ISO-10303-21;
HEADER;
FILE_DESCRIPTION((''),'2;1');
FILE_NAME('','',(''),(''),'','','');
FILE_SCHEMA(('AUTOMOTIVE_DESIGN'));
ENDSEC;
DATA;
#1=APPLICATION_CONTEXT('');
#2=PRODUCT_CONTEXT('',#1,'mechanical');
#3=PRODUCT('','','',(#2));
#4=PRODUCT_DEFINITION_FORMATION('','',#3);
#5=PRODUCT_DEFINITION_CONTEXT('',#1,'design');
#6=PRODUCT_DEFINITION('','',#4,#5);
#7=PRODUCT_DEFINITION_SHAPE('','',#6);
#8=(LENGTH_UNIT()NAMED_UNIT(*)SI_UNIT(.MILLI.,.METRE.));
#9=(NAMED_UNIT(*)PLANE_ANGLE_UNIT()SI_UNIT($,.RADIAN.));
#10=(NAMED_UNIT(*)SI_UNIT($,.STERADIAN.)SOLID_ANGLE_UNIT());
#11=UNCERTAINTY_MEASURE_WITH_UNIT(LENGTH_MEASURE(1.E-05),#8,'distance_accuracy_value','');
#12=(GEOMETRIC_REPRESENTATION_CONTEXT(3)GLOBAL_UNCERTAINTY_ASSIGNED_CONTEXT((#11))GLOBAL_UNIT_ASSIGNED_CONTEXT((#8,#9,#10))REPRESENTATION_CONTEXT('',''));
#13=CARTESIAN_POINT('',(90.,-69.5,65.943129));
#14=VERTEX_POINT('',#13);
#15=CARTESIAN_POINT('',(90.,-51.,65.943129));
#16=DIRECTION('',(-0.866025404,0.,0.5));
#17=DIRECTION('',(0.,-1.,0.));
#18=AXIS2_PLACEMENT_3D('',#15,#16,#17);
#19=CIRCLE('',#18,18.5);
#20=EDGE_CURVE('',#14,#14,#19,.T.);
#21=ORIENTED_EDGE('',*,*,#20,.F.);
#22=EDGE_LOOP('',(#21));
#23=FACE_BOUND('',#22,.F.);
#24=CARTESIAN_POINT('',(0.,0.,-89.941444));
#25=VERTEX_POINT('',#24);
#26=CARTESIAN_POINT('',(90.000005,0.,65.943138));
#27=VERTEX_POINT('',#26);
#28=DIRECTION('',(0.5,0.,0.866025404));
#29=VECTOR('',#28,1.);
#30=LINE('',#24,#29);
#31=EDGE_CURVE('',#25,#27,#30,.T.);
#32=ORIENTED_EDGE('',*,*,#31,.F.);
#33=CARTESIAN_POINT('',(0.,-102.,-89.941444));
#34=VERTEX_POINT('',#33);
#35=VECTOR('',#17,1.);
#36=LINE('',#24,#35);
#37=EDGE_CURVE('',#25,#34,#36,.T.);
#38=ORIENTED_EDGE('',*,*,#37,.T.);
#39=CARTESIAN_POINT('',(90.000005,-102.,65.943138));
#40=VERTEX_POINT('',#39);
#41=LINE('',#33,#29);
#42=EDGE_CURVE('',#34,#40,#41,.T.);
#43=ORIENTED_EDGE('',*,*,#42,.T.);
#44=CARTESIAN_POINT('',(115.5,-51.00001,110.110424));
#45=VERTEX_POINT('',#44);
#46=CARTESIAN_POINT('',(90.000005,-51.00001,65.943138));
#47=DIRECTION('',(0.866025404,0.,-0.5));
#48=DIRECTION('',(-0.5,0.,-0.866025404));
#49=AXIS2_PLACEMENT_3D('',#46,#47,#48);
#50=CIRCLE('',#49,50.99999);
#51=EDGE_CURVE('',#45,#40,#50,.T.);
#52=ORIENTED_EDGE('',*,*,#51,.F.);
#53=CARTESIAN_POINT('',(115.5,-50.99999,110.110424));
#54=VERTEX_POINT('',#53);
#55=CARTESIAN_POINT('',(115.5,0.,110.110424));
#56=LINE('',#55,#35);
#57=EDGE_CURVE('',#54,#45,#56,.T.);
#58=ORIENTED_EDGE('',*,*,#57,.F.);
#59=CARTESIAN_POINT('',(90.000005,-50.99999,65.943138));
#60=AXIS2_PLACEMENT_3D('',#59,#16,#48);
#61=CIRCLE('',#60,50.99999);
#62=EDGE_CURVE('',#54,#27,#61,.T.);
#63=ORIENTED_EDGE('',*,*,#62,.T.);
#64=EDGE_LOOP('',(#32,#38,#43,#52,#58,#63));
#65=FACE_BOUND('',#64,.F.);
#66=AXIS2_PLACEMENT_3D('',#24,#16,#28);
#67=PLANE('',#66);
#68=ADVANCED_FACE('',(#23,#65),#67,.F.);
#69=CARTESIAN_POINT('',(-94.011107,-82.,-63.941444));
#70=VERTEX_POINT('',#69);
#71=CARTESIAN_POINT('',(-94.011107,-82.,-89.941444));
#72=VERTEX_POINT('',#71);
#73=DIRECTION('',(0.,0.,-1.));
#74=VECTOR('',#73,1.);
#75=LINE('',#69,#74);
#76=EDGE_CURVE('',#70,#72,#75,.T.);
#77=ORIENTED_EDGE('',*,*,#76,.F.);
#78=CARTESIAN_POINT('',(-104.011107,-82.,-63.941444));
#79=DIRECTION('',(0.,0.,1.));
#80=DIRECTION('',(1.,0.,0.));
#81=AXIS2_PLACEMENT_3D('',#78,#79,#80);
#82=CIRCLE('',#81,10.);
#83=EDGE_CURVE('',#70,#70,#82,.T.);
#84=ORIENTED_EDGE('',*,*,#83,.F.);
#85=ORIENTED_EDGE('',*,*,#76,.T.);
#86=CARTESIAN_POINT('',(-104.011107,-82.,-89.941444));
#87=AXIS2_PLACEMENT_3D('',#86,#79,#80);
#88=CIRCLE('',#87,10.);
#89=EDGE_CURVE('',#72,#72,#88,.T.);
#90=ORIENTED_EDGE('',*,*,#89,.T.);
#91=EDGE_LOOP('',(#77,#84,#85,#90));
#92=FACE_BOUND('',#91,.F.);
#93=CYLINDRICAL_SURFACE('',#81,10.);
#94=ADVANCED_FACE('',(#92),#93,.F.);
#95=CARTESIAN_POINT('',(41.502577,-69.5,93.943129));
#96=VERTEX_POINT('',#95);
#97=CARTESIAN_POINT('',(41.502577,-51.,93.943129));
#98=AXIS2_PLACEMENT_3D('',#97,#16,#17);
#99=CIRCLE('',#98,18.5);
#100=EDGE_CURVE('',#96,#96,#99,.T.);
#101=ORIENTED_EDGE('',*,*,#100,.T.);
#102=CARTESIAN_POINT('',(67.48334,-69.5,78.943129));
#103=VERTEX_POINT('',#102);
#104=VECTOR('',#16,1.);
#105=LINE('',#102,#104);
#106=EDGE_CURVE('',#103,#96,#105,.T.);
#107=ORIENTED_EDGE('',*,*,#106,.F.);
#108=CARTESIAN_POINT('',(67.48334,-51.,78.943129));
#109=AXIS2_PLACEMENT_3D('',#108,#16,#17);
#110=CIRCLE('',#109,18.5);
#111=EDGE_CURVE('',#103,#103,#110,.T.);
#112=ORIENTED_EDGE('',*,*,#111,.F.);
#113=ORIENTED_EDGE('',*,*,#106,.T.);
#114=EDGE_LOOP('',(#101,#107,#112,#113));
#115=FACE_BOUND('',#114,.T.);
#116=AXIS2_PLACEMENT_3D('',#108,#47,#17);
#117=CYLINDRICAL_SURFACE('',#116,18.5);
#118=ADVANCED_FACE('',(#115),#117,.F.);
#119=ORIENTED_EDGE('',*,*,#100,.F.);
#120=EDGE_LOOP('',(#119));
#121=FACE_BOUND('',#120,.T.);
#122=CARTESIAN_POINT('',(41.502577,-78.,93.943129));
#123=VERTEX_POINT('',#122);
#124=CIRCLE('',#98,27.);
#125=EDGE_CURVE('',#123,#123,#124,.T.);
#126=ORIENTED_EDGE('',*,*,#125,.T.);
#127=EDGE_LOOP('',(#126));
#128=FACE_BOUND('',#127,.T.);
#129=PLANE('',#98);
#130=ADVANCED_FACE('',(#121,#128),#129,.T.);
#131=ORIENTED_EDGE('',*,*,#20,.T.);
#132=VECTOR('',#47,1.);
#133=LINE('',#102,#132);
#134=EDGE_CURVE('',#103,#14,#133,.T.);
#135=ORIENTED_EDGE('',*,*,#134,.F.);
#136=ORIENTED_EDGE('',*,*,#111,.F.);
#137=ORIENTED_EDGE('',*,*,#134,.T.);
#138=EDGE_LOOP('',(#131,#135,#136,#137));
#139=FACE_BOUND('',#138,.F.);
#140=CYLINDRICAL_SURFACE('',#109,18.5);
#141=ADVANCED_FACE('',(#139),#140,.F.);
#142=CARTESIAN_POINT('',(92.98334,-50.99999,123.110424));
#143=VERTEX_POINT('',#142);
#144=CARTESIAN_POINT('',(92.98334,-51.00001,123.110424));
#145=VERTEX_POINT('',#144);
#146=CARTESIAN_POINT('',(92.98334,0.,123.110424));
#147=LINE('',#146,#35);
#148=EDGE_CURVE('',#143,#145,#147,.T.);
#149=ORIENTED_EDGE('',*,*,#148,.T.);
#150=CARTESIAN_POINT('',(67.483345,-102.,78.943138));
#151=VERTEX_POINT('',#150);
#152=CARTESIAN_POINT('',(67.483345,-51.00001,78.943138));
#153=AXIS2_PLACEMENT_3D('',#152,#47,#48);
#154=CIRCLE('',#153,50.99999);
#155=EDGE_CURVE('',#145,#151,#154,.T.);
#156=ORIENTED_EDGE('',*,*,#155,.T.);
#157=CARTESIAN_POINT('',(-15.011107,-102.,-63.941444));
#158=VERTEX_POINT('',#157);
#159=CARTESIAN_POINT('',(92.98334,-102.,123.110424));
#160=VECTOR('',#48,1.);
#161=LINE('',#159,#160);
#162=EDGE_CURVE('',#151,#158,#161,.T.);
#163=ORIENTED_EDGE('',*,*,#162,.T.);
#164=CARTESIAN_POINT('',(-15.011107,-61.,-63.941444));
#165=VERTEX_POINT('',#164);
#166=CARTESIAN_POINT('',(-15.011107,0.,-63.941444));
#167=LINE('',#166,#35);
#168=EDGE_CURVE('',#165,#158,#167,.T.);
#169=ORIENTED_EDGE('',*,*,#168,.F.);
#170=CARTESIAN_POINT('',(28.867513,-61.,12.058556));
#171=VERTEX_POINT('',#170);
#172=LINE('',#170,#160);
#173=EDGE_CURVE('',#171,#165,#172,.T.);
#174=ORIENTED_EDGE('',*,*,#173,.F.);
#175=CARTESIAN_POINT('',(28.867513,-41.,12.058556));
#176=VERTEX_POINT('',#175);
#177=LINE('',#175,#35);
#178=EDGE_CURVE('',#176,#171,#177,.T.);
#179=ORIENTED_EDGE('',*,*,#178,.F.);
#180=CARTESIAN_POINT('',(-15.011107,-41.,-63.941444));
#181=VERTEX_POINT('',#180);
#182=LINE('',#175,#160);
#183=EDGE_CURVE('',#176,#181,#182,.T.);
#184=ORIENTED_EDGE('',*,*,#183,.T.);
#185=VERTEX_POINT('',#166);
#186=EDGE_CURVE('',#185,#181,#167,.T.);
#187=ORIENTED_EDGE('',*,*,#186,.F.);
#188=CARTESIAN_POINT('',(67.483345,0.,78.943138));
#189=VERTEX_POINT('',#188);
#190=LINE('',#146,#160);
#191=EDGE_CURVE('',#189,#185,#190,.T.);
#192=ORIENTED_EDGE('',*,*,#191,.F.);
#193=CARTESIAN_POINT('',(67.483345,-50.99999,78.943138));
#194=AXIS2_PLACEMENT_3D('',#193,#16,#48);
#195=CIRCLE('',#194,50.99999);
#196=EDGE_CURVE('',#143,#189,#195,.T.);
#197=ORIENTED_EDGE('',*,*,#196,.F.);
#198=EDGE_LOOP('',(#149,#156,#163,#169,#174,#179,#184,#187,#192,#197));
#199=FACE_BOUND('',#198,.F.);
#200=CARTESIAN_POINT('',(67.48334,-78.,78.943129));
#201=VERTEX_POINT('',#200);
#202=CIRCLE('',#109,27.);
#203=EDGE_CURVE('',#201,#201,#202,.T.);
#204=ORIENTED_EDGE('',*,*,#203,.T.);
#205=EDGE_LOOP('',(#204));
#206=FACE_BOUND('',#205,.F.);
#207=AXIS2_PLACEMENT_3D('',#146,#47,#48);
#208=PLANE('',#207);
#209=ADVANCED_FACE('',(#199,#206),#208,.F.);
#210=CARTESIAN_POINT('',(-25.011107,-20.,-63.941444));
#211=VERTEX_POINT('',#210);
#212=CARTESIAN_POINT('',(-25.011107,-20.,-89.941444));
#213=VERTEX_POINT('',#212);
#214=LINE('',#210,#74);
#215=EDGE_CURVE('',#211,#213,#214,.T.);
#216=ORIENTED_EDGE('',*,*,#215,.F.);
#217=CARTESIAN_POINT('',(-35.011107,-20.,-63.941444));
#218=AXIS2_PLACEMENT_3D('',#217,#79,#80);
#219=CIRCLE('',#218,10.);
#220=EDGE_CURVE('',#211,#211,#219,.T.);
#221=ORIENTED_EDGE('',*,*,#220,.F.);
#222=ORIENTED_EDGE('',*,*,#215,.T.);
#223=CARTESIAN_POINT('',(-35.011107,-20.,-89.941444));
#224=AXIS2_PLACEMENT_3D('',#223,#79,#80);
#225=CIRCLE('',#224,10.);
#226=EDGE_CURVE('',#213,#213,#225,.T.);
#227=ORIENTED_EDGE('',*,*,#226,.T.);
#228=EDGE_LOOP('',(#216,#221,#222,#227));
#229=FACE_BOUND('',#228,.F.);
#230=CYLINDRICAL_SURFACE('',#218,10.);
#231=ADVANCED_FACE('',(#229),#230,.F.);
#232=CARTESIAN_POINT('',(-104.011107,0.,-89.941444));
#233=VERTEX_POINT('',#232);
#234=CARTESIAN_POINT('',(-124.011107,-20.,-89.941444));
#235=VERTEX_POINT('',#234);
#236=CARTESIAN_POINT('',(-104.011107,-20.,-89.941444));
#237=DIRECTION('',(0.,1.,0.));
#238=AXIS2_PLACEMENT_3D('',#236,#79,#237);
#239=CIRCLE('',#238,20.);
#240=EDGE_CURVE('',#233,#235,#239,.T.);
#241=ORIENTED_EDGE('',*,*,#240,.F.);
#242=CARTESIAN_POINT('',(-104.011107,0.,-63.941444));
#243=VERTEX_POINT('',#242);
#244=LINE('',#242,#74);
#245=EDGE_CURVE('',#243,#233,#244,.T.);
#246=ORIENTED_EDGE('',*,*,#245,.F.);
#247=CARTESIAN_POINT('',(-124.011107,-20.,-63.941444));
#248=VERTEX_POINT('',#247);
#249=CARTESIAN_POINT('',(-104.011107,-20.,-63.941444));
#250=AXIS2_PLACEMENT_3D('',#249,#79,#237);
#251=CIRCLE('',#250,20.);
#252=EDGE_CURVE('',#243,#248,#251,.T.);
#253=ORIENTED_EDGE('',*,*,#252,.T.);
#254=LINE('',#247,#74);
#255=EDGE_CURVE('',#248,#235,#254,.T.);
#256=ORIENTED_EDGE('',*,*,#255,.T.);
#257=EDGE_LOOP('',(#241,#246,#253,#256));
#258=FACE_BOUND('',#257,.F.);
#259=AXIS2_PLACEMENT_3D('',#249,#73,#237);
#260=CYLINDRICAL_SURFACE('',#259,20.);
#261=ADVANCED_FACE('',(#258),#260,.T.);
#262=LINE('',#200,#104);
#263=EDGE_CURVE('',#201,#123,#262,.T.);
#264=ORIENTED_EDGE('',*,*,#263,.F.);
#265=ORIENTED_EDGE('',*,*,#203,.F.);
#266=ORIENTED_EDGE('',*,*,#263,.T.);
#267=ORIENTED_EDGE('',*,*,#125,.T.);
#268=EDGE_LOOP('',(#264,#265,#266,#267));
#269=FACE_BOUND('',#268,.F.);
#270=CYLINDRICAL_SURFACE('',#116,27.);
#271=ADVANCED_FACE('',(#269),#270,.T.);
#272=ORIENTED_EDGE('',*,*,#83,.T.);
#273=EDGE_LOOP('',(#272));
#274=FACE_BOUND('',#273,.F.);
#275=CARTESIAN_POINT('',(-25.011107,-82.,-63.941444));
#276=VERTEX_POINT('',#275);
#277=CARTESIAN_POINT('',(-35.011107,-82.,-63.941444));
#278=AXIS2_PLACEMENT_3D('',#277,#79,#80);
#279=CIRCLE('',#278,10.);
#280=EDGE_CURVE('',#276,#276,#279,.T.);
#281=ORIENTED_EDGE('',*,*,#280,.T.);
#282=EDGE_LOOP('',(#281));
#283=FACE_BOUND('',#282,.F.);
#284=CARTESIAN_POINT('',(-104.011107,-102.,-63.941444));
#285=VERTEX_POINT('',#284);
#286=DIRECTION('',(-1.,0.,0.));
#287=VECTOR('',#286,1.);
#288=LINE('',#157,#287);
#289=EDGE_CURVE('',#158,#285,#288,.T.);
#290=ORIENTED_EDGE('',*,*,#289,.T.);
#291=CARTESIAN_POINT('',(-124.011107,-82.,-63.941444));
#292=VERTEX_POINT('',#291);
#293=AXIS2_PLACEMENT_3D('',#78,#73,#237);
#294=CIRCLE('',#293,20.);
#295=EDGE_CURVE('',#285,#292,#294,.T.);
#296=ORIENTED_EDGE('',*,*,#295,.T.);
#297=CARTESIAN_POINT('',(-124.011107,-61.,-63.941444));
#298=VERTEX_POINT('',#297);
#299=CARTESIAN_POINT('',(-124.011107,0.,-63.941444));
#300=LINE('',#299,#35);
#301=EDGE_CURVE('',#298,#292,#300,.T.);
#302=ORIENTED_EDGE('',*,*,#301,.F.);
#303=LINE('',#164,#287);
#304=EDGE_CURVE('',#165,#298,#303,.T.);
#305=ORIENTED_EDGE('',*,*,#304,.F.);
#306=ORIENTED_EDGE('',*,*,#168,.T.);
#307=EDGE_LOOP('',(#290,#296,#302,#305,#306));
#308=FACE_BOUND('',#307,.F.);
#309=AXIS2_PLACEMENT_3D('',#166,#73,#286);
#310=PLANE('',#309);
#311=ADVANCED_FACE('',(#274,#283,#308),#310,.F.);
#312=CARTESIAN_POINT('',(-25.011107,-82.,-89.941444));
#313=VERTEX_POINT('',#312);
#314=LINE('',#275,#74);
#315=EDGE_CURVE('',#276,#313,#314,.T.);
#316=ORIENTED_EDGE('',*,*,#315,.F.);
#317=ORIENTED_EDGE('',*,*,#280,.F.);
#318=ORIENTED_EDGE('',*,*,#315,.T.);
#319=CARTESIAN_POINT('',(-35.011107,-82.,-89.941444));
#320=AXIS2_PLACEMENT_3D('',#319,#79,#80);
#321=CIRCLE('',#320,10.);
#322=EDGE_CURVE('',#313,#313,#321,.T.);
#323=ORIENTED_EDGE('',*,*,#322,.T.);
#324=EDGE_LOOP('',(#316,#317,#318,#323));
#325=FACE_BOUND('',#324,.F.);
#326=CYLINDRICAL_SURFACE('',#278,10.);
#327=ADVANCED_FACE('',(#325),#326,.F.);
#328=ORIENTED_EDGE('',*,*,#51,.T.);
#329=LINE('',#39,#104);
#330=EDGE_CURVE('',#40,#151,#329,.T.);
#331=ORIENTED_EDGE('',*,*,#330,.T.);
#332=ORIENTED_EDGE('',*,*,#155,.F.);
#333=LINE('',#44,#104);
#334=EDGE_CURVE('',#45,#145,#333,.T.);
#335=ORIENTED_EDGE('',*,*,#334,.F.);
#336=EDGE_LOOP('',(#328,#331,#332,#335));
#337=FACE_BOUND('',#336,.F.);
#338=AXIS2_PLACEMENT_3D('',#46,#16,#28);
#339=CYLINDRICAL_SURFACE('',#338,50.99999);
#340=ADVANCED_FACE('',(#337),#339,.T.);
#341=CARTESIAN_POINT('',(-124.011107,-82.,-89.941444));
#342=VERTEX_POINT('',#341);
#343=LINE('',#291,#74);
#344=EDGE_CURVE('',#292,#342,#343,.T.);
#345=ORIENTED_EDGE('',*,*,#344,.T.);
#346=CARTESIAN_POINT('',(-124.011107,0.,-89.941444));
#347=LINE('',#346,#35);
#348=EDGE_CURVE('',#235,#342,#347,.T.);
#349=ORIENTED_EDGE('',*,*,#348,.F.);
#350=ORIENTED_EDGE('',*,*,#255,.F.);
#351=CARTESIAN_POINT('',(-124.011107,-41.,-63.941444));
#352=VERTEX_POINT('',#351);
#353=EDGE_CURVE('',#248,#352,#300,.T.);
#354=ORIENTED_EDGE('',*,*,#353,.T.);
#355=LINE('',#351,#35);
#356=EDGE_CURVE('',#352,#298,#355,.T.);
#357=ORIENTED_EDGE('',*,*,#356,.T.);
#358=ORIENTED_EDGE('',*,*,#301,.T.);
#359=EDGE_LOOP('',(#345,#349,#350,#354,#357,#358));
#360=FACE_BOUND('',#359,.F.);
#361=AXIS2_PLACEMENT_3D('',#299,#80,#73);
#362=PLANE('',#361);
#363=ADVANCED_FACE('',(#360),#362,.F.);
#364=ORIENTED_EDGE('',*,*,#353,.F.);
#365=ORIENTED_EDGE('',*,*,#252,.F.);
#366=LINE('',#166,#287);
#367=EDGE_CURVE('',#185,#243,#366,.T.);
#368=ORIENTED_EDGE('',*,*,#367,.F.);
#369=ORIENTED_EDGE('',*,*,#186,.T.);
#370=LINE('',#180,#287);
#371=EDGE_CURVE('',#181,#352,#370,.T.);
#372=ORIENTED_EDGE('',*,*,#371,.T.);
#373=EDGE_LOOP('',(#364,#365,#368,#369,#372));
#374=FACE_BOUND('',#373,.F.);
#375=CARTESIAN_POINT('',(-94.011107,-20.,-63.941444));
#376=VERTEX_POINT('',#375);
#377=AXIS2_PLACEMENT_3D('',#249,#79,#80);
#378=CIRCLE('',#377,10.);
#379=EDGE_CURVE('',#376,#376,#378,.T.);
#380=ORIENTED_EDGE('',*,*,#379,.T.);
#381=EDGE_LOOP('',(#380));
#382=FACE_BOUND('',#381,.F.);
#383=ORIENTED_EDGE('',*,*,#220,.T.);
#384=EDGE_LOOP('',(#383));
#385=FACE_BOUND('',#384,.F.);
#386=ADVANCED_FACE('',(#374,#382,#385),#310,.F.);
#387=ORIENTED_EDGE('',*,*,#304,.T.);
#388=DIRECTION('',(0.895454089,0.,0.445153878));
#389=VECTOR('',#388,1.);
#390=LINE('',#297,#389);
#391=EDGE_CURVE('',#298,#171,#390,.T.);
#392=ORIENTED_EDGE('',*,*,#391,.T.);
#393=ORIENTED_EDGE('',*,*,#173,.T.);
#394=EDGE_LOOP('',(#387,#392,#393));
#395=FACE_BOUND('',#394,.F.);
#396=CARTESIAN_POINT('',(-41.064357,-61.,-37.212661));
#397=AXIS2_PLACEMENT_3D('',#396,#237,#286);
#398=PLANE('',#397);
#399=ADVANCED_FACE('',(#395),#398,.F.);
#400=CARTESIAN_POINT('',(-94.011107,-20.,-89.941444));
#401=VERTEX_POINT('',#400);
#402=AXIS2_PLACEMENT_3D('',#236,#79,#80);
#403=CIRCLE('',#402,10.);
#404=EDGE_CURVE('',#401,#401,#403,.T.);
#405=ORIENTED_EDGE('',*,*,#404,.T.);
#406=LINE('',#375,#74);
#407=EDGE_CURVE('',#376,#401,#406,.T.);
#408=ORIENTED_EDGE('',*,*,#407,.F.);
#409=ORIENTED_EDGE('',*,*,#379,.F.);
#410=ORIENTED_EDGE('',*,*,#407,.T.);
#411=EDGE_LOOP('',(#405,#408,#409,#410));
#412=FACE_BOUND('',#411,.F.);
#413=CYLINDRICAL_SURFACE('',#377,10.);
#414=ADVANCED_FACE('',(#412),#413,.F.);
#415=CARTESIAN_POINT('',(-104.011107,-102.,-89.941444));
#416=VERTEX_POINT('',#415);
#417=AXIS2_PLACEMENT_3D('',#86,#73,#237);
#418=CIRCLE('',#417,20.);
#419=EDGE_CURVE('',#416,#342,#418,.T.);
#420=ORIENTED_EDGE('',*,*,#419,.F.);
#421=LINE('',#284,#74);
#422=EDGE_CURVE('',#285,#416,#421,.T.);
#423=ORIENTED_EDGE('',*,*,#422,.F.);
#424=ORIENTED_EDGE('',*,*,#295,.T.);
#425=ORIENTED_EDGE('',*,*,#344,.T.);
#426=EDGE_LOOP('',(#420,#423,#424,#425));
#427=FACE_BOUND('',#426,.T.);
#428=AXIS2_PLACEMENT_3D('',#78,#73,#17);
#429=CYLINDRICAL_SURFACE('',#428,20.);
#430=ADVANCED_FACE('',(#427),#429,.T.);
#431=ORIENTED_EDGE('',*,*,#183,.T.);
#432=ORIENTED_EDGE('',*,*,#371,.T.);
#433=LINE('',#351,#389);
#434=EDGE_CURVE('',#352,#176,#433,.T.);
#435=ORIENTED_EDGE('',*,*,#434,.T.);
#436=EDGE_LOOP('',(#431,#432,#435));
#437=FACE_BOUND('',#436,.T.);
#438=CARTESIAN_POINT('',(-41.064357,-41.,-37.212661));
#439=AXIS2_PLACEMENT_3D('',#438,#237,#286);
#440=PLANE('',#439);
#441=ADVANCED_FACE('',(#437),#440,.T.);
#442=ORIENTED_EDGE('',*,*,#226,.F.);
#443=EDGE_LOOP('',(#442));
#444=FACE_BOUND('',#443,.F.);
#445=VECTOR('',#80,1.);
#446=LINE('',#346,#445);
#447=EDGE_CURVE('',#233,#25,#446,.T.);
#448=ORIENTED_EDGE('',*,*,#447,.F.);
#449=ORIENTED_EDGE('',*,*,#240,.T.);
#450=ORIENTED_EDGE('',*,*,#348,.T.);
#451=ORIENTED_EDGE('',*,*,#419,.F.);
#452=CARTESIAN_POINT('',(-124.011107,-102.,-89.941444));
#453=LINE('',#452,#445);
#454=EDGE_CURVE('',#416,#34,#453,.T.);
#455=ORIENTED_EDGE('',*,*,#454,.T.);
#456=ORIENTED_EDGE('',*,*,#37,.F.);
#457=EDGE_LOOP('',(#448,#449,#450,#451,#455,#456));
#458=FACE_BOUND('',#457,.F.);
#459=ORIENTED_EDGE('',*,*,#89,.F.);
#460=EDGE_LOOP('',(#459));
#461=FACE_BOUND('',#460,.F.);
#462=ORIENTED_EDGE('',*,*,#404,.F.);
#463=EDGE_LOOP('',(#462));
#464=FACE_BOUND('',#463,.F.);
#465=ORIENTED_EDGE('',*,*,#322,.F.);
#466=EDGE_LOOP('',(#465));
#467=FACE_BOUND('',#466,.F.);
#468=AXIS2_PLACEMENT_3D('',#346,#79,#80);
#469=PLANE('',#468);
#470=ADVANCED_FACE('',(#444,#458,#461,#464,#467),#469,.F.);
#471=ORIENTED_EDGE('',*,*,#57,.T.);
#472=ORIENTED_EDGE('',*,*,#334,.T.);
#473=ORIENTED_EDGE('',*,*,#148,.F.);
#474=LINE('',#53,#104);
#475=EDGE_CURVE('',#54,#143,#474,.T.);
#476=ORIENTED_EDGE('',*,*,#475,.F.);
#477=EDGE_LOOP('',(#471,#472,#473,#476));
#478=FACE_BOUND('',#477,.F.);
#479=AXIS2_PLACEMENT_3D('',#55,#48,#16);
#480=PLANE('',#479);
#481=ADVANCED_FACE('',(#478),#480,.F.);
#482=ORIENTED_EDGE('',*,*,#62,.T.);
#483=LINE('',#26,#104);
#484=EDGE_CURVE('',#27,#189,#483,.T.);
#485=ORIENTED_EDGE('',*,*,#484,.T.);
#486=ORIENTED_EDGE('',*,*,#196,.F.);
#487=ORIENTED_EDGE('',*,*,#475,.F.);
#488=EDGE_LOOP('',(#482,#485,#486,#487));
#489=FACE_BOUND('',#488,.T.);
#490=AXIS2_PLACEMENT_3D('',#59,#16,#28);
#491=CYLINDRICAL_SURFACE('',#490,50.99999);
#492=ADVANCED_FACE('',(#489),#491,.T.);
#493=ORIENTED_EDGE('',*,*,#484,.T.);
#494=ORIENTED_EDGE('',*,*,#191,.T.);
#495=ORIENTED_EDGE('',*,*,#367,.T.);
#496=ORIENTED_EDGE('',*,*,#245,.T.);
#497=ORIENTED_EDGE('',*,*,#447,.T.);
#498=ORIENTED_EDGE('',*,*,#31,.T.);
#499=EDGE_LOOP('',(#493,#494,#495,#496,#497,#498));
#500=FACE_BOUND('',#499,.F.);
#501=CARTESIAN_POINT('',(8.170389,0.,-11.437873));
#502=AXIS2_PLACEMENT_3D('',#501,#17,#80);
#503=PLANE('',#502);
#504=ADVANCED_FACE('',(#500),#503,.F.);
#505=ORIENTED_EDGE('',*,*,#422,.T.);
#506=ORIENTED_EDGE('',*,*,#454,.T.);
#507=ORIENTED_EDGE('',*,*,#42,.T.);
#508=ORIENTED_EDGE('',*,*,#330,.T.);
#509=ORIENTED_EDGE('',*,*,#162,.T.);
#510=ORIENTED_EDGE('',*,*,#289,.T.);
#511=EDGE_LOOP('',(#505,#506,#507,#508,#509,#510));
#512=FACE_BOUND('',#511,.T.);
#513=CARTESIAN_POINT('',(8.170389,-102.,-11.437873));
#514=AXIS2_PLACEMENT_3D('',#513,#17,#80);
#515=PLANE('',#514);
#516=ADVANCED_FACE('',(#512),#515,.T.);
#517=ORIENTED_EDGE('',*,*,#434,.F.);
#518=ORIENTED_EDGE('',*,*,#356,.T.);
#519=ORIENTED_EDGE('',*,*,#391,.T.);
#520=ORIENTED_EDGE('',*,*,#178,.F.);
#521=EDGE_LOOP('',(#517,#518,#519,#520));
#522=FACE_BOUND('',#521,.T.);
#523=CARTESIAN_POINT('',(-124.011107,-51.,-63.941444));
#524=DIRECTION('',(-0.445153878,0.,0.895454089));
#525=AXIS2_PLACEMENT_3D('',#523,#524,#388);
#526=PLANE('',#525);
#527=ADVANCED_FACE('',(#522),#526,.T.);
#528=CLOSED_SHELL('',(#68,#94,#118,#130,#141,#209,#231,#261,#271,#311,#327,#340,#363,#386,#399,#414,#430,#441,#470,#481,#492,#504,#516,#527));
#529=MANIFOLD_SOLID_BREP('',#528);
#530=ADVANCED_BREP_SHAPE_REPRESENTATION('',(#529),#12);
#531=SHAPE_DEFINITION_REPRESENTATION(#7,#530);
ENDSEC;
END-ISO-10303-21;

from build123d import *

# Parameters (mm, degrees)
F1_DEPTH  = 102
F2_R      = 50.99999
F3_R      = 27
F3_R_2    = 18.5
F4_DEPTH  = 30
F5_R      = 18.5
F6_DEPTH  = 30
F9_DEPTH  = 10
F10_R     = 10
F11_DEPTH = 30
F12_R     = 20


# Not quite as in the source:
# - a fillet or chamfer is up to 0.001 mm smaller than in the source, because OpenCascade refuses the exact size


with BuildPart() as f1:
    # F0 (on Front) → F1 (new body)
    with BuildSketch(Plane.XZ):
        Polygon((-15.0111069989, -63.9414438152), (-124.0111069989, -63.9414438152), (-124.0111069989, -89.9414438152), (0, -89.9414438152), (115.5, 110.110424459), (92.9833395016, 123.110424459), align=None)
    extrude(amount=F1_DEPTH)

    # F2 (radius 51 in the source; OpenCascade refuses exactly that, so slightly less here)
    f2_edges = [f1.edges().sort_by_distance(p)[0] for p in [
        (104.24167, 0, 116.610424),
        (104.24167, -102, 116.610424),
    ]]
    fillet(f2_edges, radius=F2_R)

    # F3 (on face) → F4 (join)
    with BuildSketch(Plane(origin=(16.4291271001, 0, -9.4853609538), x_dir=(0, -1, 0), z_dir=(-0.8660254038, 0, 0.5))):
        with Locations((51, 102.108424803)):
            Circle(F3_R)
        with Locations((51, 102.108424803)):
            Circle(F3_R_2, mode=Mode.SUBTRACT)
    extrude(amount=F4_DEPTH)

    # F5 (on face) → F6 (cut)
    with BuildSketch(Plane(origin=(16.4291271001, 0, -9.4853609538), x_dir=(0, -1, 0), z_dir=(-0.8660254038, 0, 0.5))):
        with Locations((51, 102.108424803)):
            Circle(F5_R)
    extrude(amount=-F6_DEPTH, mode=Mode.SUBTRACT)

    # F8 (on offset) → F9 (join, symmetric)
    with BuildSketch(Plane(origin=(0, -51, 0), x_dir=(-1, 0, 0), z_dir=(0, 1, 0))):
        Polygon((-28.8675134595, 12.0585561848), (15.0111069989, -63.9414438152), (124.0111069989, -63.9414438152), align=None)
    extrude(amount=F9_DEPTH, both=True)

    # F10 (on face) → F11 (cut)
    with BuildSketch(Plane.XY.offset(-63.9414438152)):
        with Locations((-104.0111069989, -20)):
            Circle(F10_R)
        with Locations((-104.0111069989, -82)):
            Circle(F10_R)
        with Locations((-35.0111069989, -20)):
            Circle(F10_R)
        with Locations((-35.0111069989, -82)):
            Circle(F10_R)
    extrude(amount=-F11_DEPTH, mode=Mode.SUBTRACT)

    # F12
    f12_edges = [f1.edges().sort_by_distance(p)[0] for p in [
        (-124.011107, 0, -76.941444),
        (-124.011107, -102, -76.941444),
    ]]
    fillet(f12_edges, radius=F12_R)


solid = f1.part
